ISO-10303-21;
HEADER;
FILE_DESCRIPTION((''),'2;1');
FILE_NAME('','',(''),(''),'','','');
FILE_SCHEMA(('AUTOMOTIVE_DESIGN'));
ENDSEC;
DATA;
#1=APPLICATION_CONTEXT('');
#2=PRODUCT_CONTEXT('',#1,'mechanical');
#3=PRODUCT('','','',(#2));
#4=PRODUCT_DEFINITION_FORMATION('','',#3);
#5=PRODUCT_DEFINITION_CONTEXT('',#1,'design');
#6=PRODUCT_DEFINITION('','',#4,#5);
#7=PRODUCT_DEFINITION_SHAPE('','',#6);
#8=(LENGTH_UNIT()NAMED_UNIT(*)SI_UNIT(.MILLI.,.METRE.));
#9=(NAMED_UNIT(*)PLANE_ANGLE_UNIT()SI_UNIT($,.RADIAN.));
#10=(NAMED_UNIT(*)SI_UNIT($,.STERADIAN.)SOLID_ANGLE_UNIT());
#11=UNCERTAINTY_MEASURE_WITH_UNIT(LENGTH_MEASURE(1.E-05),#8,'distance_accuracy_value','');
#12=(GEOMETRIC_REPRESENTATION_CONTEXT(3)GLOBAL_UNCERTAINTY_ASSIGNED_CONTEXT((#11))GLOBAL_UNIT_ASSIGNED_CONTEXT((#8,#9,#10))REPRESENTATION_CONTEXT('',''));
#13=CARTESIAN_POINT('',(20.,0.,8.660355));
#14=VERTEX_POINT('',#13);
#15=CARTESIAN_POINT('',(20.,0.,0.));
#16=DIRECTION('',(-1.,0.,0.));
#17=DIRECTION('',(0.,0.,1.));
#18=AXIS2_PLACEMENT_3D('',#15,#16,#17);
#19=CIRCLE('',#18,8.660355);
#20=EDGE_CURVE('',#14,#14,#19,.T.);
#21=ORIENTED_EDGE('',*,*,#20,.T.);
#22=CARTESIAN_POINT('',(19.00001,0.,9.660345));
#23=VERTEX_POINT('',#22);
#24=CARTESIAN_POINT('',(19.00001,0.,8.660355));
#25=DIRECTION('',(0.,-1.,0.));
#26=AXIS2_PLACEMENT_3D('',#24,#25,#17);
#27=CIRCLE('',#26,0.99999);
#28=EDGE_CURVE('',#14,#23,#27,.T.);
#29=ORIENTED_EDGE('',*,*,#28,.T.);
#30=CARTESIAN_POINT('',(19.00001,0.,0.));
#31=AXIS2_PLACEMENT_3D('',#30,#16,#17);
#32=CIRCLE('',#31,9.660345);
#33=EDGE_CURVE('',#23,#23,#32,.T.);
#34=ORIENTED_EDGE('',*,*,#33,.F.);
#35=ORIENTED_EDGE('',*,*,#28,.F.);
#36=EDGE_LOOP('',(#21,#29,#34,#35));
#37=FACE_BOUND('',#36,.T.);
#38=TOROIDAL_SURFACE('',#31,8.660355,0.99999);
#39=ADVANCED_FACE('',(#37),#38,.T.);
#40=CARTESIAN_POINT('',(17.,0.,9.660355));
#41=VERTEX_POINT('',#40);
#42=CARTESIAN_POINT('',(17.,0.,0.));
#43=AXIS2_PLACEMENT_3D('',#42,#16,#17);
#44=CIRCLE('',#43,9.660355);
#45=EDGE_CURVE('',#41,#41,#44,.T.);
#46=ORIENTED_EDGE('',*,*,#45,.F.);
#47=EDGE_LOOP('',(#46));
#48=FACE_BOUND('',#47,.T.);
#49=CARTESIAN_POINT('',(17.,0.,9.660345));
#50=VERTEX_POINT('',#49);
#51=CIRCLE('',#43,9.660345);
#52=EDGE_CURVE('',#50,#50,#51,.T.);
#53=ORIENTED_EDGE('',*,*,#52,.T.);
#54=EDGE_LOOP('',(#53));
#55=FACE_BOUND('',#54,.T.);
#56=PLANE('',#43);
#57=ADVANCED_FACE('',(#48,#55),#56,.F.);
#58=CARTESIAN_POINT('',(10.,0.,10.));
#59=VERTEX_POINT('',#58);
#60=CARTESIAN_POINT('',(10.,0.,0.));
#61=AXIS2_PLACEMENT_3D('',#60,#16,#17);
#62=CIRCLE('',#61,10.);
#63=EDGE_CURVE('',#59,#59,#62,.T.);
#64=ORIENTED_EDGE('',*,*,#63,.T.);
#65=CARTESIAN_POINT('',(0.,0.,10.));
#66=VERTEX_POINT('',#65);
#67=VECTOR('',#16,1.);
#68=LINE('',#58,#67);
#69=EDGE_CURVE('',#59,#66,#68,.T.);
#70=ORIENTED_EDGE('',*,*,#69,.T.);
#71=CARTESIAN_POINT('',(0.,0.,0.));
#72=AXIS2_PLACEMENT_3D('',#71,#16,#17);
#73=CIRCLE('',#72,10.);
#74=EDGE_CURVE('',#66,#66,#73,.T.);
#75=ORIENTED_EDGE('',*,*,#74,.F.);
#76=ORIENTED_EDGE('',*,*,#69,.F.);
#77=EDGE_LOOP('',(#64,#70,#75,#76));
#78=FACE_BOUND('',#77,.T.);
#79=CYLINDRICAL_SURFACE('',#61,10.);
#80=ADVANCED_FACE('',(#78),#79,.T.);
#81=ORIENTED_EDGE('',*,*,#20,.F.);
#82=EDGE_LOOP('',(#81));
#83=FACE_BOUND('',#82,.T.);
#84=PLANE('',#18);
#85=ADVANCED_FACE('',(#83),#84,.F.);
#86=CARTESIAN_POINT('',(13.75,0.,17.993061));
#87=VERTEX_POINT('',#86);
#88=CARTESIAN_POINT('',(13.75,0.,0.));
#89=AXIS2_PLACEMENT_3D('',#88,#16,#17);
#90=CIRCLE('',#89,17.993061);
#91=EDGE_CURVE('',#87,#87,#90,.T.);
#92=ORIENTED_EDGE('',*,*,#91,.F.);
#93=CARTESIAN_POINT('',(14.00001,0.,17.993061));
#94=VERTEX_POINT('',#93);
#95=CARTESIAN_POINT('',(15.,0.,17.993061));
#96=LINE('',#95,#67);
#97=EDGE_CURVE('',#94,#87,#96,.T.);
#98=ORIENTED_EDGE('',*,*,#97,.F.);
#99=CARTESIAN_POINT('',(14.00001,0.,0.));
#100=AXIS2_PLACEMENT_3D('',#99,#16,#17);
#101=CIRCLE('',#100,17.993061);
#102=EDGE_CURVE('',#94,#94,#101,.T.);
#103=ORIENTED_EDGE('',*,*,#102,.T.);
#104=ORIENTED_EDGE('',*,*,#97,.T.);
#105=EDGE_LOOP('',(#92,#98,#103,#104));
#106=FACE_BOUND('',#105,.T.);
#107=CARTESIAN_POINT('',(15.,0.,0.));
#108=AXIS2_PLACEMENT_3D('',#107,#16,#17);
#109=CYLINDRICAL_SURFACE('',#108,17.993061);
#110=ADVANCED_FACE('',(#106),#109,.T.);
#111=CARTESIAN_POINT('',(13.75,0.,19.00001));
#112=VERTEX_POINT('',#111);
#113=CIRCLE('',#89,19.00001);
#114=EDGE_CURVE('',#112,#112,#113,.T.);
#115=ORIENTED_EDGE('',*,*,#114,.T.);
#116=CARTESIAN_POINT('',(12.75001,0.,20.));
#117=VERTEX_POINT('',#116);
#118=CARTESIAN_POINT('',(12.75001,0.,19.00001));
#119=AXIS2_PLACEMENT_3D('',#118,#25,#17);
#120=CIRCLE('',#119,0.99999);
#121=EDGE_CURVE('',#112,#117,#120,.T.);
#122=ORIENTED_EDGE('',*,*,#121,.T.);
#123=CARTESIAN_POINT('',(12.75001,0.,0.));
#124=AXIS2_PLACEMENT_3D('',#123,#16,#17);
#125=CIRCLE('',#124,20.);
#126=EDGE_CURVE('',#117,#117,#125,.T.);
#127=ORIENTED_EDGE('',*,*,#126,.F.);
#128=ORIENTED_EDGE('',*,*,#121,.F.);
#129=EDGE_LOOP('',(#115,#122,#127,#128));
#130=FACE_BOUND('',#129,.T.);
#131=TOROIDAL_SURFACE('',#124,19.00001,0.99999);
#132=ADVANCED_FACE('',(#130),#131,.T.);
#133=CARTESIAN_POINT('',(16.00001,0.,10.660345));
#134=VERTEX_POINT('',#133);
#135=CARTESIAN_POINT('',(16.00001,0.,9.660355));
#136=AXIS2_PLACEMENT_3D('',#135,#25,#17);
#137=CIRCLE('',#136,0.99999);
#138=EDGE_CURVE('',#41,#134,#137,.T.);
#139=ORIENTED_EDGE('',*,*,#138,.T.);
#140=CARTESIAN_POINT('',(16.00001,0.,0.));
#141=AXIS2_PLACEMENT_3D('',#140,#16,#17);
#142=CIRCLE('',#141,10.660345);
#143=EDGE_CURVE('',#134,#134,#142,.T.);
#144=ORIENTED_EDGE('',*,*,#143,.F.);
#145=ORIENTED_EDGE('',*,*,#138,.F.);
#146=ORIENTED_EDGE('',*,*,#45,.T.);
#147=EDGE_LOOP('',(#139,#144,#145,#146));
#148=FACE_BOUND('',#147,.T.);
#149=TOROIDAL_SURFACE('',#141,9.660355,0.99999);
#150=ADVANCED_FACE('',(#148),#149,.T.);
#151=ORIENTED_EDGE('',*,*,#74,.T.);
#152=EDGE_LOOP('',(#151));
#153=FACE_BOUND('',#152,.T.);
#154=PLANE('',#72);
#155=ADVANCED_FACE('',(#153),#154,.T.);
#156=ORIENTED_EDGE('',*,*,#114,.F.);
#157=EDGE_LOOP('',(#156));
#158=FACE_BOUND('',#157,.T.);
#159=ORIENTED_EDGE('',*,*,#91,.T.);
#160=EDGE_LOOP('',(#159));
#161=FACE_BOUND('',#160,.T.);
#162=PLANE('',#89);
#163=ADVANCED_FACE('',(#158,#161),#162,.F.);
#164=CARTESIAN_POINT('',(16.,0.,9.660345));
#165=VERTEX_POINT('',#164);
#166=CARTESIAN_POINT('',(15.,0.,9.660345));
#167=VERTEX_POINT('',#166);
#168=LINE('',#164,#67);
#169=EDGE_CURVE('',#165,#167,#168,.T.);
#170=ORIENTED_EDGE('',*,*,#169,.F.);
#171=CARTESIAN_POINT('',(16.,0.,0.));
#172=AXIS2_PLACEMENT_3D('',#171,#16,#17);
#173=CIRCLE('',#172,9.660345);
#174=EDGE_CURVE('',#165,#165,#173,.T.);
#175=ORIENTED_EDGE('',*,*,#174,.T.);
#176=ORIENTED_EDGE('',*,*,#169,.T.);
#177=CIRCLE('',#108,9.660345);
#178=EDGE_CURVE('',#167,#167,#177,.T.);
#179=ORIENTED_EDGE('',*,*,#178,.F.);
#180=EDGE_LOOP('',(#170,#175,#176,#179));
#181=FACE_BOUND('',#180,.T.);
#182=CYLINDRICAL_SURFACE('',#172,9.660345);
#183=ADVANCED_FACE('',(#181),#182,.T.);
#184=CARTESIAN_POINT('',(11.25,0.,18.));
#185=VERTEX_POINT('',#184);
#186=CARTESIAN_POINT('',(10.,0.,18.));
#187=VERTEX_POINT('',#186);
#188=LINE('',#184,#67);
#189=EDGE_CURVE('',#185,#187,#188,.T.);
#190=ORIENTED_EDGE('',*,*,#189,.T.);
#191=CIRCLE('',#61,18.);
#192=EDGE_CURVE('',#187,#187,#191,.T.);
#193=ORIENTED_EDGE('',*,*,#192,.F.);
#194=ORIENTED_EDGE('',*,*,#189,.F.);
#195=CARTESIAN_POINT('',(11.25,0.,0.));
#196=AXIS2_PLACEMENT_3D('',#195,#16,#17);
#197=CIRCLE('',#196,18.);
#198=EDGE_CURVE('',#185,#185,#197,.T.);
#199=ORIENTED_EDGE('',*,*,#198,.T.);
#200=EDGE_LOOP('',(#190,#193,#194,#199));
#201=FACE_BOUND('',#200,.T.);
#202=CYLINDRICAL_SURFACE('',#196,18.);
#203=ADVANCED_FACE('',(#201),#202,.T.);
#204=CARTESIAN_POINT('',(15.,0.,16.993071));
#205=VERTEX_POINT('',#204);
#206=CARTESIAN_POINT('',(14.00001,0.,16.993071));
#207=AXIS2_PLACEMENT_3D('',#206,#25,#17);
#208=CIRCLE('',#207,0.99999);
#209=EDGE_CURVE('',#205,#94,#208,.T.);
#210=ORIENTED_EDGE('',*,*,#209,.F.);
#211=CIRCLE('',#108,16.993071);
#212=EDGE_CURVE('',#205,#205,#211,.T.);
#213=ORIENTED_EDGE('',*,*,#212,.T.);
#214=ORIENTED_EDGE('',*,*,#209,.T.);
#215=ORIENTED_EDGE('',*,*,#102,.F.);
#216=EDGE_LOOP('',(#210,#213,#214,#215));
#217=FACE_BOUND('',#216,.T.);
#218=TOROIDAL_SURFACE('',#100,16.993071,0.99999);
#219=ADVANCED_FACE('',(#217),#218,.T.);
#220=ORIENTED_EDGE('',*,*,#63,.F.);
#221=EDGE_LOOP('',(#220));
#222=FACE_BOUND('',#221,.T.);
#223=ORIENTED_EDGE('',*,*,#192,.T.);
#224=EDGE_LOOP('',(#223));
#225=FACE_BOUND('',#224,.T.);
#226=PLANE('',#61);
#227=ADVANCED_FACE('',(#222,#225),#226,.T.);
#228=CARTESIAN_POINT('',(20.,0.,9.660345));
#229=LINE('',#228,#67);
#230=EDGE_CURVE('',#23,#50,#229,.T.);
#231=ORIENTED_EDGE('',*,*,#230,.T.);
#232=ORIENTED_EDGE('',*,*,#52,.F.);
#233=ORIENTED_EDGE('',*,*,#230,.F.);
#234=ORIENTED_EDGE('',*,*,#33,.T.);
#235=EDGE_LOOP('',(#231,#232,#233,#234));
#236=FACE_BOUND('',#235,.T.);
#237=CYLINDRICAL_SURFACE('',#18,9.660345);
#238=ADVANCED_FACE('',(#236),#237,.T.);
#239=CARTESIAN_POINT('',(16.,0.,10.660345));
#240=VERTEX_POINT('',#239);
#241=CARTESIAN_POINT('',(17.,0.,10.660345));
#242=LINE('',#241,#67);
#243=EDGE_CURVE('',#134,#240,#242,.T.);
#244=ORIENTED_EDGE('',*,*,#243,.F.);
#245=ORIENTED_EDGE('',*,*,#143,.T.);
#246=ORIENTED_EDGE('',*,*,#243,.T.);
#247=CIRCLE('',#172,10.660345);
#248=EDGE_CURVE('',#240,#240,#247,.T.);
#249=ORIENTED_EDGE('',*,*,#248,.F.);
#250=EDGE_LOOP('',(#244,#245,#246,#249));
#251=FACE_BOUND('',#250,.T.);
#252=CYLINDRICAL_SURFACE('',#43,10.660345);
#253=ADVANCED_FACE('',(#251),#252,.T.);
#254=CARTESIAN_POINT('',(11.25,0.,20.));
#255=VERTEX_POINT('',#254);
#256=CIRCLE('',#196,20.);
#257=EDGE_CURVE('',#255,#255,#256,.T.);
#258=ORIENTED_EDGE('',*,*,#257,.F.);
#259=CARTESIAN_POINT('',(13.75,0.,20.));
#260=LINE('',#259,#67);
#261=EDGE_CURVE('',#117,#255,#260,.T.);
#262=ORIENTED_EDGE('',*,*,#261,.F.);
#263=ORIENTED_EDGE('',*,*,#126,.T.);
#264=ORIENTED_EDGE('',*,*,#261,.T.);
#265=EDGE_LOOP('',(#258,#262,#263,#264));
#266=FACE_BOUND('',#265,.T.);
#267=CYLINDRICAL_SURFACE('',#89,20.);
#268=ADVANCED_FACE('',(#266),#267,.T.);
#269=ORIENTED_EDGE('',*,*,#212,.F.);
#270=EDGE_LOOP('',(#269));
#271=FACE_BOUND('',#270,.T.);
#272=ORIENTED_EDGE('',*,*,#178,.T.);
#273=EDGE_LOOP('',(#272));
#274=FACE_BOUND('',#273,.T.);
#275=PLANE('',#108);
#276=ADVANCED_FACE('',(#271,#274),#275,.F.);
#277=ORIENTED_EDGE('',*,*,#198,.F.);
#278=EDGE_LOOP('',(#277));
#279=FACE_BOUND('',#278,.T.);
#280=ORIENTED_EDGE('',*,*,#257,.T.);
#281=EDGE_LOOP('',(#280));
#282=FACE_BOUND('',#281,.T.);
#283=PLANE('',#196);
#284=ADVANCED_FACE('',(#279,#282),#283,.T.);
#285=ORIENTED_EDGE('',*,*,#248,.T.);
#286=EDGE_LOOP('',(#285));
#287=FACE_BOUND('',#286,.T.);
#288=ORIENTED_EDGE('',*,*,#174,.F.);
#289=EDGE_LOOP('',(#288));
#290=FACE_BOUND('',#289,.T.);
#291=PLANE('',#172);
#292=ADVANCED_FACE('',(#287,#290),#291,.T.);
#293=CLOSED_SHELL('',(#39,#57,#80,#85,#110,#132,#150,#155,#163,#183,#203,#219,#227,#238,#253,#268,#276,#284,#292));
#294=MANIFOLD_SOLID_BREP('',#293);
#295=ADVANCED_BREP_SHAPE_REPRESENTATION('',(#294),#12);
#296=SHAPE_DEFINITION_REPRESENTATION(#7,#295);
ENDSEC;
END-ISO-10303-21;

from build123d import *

# Parameters (mm, degrees)
F2_R = 0.99999


# Not quite as in the source:
# - a fillet or chamfer is up to 0.001 mm smaller than in the source, because OpenCascade refuses the exact size


with BuildPart() as f1:
    # F0 (on Front) → F1 (revolve)
    with BuildSketch(Plane.XZ):
        Polygon((0, 10), (0, 0), (20, 0), (20, 9.6603445709), (17, 9.6603445709), (17, 10.6603445709), (16, 10.6603445709), (16, 9.6603445709), (15, 9.6603445709), (15, 17.993060872), (13.75, 17.993060872), (13.75, 20), (11.25, 20), (11.25, 18), (10, 18), (10, 10), align=None)
    revolve(axis=Axis((10, 0, 0), (-1, 0, 0)))

    # F2 (radius 1 in the source; OpenCascade refuses exactly that, so slightly less here)
    f2_edges = [f1.edges().sort_by_distance(p)[0] for p in [
        (20, 0, -9.660345),
        (17, 0, -10.660345),
        (15, 0, -17.993061),
        (13.75, 0, -20),
    ]]
    fillet(f2_edges, radius=F2_R)


solid = f1.part
